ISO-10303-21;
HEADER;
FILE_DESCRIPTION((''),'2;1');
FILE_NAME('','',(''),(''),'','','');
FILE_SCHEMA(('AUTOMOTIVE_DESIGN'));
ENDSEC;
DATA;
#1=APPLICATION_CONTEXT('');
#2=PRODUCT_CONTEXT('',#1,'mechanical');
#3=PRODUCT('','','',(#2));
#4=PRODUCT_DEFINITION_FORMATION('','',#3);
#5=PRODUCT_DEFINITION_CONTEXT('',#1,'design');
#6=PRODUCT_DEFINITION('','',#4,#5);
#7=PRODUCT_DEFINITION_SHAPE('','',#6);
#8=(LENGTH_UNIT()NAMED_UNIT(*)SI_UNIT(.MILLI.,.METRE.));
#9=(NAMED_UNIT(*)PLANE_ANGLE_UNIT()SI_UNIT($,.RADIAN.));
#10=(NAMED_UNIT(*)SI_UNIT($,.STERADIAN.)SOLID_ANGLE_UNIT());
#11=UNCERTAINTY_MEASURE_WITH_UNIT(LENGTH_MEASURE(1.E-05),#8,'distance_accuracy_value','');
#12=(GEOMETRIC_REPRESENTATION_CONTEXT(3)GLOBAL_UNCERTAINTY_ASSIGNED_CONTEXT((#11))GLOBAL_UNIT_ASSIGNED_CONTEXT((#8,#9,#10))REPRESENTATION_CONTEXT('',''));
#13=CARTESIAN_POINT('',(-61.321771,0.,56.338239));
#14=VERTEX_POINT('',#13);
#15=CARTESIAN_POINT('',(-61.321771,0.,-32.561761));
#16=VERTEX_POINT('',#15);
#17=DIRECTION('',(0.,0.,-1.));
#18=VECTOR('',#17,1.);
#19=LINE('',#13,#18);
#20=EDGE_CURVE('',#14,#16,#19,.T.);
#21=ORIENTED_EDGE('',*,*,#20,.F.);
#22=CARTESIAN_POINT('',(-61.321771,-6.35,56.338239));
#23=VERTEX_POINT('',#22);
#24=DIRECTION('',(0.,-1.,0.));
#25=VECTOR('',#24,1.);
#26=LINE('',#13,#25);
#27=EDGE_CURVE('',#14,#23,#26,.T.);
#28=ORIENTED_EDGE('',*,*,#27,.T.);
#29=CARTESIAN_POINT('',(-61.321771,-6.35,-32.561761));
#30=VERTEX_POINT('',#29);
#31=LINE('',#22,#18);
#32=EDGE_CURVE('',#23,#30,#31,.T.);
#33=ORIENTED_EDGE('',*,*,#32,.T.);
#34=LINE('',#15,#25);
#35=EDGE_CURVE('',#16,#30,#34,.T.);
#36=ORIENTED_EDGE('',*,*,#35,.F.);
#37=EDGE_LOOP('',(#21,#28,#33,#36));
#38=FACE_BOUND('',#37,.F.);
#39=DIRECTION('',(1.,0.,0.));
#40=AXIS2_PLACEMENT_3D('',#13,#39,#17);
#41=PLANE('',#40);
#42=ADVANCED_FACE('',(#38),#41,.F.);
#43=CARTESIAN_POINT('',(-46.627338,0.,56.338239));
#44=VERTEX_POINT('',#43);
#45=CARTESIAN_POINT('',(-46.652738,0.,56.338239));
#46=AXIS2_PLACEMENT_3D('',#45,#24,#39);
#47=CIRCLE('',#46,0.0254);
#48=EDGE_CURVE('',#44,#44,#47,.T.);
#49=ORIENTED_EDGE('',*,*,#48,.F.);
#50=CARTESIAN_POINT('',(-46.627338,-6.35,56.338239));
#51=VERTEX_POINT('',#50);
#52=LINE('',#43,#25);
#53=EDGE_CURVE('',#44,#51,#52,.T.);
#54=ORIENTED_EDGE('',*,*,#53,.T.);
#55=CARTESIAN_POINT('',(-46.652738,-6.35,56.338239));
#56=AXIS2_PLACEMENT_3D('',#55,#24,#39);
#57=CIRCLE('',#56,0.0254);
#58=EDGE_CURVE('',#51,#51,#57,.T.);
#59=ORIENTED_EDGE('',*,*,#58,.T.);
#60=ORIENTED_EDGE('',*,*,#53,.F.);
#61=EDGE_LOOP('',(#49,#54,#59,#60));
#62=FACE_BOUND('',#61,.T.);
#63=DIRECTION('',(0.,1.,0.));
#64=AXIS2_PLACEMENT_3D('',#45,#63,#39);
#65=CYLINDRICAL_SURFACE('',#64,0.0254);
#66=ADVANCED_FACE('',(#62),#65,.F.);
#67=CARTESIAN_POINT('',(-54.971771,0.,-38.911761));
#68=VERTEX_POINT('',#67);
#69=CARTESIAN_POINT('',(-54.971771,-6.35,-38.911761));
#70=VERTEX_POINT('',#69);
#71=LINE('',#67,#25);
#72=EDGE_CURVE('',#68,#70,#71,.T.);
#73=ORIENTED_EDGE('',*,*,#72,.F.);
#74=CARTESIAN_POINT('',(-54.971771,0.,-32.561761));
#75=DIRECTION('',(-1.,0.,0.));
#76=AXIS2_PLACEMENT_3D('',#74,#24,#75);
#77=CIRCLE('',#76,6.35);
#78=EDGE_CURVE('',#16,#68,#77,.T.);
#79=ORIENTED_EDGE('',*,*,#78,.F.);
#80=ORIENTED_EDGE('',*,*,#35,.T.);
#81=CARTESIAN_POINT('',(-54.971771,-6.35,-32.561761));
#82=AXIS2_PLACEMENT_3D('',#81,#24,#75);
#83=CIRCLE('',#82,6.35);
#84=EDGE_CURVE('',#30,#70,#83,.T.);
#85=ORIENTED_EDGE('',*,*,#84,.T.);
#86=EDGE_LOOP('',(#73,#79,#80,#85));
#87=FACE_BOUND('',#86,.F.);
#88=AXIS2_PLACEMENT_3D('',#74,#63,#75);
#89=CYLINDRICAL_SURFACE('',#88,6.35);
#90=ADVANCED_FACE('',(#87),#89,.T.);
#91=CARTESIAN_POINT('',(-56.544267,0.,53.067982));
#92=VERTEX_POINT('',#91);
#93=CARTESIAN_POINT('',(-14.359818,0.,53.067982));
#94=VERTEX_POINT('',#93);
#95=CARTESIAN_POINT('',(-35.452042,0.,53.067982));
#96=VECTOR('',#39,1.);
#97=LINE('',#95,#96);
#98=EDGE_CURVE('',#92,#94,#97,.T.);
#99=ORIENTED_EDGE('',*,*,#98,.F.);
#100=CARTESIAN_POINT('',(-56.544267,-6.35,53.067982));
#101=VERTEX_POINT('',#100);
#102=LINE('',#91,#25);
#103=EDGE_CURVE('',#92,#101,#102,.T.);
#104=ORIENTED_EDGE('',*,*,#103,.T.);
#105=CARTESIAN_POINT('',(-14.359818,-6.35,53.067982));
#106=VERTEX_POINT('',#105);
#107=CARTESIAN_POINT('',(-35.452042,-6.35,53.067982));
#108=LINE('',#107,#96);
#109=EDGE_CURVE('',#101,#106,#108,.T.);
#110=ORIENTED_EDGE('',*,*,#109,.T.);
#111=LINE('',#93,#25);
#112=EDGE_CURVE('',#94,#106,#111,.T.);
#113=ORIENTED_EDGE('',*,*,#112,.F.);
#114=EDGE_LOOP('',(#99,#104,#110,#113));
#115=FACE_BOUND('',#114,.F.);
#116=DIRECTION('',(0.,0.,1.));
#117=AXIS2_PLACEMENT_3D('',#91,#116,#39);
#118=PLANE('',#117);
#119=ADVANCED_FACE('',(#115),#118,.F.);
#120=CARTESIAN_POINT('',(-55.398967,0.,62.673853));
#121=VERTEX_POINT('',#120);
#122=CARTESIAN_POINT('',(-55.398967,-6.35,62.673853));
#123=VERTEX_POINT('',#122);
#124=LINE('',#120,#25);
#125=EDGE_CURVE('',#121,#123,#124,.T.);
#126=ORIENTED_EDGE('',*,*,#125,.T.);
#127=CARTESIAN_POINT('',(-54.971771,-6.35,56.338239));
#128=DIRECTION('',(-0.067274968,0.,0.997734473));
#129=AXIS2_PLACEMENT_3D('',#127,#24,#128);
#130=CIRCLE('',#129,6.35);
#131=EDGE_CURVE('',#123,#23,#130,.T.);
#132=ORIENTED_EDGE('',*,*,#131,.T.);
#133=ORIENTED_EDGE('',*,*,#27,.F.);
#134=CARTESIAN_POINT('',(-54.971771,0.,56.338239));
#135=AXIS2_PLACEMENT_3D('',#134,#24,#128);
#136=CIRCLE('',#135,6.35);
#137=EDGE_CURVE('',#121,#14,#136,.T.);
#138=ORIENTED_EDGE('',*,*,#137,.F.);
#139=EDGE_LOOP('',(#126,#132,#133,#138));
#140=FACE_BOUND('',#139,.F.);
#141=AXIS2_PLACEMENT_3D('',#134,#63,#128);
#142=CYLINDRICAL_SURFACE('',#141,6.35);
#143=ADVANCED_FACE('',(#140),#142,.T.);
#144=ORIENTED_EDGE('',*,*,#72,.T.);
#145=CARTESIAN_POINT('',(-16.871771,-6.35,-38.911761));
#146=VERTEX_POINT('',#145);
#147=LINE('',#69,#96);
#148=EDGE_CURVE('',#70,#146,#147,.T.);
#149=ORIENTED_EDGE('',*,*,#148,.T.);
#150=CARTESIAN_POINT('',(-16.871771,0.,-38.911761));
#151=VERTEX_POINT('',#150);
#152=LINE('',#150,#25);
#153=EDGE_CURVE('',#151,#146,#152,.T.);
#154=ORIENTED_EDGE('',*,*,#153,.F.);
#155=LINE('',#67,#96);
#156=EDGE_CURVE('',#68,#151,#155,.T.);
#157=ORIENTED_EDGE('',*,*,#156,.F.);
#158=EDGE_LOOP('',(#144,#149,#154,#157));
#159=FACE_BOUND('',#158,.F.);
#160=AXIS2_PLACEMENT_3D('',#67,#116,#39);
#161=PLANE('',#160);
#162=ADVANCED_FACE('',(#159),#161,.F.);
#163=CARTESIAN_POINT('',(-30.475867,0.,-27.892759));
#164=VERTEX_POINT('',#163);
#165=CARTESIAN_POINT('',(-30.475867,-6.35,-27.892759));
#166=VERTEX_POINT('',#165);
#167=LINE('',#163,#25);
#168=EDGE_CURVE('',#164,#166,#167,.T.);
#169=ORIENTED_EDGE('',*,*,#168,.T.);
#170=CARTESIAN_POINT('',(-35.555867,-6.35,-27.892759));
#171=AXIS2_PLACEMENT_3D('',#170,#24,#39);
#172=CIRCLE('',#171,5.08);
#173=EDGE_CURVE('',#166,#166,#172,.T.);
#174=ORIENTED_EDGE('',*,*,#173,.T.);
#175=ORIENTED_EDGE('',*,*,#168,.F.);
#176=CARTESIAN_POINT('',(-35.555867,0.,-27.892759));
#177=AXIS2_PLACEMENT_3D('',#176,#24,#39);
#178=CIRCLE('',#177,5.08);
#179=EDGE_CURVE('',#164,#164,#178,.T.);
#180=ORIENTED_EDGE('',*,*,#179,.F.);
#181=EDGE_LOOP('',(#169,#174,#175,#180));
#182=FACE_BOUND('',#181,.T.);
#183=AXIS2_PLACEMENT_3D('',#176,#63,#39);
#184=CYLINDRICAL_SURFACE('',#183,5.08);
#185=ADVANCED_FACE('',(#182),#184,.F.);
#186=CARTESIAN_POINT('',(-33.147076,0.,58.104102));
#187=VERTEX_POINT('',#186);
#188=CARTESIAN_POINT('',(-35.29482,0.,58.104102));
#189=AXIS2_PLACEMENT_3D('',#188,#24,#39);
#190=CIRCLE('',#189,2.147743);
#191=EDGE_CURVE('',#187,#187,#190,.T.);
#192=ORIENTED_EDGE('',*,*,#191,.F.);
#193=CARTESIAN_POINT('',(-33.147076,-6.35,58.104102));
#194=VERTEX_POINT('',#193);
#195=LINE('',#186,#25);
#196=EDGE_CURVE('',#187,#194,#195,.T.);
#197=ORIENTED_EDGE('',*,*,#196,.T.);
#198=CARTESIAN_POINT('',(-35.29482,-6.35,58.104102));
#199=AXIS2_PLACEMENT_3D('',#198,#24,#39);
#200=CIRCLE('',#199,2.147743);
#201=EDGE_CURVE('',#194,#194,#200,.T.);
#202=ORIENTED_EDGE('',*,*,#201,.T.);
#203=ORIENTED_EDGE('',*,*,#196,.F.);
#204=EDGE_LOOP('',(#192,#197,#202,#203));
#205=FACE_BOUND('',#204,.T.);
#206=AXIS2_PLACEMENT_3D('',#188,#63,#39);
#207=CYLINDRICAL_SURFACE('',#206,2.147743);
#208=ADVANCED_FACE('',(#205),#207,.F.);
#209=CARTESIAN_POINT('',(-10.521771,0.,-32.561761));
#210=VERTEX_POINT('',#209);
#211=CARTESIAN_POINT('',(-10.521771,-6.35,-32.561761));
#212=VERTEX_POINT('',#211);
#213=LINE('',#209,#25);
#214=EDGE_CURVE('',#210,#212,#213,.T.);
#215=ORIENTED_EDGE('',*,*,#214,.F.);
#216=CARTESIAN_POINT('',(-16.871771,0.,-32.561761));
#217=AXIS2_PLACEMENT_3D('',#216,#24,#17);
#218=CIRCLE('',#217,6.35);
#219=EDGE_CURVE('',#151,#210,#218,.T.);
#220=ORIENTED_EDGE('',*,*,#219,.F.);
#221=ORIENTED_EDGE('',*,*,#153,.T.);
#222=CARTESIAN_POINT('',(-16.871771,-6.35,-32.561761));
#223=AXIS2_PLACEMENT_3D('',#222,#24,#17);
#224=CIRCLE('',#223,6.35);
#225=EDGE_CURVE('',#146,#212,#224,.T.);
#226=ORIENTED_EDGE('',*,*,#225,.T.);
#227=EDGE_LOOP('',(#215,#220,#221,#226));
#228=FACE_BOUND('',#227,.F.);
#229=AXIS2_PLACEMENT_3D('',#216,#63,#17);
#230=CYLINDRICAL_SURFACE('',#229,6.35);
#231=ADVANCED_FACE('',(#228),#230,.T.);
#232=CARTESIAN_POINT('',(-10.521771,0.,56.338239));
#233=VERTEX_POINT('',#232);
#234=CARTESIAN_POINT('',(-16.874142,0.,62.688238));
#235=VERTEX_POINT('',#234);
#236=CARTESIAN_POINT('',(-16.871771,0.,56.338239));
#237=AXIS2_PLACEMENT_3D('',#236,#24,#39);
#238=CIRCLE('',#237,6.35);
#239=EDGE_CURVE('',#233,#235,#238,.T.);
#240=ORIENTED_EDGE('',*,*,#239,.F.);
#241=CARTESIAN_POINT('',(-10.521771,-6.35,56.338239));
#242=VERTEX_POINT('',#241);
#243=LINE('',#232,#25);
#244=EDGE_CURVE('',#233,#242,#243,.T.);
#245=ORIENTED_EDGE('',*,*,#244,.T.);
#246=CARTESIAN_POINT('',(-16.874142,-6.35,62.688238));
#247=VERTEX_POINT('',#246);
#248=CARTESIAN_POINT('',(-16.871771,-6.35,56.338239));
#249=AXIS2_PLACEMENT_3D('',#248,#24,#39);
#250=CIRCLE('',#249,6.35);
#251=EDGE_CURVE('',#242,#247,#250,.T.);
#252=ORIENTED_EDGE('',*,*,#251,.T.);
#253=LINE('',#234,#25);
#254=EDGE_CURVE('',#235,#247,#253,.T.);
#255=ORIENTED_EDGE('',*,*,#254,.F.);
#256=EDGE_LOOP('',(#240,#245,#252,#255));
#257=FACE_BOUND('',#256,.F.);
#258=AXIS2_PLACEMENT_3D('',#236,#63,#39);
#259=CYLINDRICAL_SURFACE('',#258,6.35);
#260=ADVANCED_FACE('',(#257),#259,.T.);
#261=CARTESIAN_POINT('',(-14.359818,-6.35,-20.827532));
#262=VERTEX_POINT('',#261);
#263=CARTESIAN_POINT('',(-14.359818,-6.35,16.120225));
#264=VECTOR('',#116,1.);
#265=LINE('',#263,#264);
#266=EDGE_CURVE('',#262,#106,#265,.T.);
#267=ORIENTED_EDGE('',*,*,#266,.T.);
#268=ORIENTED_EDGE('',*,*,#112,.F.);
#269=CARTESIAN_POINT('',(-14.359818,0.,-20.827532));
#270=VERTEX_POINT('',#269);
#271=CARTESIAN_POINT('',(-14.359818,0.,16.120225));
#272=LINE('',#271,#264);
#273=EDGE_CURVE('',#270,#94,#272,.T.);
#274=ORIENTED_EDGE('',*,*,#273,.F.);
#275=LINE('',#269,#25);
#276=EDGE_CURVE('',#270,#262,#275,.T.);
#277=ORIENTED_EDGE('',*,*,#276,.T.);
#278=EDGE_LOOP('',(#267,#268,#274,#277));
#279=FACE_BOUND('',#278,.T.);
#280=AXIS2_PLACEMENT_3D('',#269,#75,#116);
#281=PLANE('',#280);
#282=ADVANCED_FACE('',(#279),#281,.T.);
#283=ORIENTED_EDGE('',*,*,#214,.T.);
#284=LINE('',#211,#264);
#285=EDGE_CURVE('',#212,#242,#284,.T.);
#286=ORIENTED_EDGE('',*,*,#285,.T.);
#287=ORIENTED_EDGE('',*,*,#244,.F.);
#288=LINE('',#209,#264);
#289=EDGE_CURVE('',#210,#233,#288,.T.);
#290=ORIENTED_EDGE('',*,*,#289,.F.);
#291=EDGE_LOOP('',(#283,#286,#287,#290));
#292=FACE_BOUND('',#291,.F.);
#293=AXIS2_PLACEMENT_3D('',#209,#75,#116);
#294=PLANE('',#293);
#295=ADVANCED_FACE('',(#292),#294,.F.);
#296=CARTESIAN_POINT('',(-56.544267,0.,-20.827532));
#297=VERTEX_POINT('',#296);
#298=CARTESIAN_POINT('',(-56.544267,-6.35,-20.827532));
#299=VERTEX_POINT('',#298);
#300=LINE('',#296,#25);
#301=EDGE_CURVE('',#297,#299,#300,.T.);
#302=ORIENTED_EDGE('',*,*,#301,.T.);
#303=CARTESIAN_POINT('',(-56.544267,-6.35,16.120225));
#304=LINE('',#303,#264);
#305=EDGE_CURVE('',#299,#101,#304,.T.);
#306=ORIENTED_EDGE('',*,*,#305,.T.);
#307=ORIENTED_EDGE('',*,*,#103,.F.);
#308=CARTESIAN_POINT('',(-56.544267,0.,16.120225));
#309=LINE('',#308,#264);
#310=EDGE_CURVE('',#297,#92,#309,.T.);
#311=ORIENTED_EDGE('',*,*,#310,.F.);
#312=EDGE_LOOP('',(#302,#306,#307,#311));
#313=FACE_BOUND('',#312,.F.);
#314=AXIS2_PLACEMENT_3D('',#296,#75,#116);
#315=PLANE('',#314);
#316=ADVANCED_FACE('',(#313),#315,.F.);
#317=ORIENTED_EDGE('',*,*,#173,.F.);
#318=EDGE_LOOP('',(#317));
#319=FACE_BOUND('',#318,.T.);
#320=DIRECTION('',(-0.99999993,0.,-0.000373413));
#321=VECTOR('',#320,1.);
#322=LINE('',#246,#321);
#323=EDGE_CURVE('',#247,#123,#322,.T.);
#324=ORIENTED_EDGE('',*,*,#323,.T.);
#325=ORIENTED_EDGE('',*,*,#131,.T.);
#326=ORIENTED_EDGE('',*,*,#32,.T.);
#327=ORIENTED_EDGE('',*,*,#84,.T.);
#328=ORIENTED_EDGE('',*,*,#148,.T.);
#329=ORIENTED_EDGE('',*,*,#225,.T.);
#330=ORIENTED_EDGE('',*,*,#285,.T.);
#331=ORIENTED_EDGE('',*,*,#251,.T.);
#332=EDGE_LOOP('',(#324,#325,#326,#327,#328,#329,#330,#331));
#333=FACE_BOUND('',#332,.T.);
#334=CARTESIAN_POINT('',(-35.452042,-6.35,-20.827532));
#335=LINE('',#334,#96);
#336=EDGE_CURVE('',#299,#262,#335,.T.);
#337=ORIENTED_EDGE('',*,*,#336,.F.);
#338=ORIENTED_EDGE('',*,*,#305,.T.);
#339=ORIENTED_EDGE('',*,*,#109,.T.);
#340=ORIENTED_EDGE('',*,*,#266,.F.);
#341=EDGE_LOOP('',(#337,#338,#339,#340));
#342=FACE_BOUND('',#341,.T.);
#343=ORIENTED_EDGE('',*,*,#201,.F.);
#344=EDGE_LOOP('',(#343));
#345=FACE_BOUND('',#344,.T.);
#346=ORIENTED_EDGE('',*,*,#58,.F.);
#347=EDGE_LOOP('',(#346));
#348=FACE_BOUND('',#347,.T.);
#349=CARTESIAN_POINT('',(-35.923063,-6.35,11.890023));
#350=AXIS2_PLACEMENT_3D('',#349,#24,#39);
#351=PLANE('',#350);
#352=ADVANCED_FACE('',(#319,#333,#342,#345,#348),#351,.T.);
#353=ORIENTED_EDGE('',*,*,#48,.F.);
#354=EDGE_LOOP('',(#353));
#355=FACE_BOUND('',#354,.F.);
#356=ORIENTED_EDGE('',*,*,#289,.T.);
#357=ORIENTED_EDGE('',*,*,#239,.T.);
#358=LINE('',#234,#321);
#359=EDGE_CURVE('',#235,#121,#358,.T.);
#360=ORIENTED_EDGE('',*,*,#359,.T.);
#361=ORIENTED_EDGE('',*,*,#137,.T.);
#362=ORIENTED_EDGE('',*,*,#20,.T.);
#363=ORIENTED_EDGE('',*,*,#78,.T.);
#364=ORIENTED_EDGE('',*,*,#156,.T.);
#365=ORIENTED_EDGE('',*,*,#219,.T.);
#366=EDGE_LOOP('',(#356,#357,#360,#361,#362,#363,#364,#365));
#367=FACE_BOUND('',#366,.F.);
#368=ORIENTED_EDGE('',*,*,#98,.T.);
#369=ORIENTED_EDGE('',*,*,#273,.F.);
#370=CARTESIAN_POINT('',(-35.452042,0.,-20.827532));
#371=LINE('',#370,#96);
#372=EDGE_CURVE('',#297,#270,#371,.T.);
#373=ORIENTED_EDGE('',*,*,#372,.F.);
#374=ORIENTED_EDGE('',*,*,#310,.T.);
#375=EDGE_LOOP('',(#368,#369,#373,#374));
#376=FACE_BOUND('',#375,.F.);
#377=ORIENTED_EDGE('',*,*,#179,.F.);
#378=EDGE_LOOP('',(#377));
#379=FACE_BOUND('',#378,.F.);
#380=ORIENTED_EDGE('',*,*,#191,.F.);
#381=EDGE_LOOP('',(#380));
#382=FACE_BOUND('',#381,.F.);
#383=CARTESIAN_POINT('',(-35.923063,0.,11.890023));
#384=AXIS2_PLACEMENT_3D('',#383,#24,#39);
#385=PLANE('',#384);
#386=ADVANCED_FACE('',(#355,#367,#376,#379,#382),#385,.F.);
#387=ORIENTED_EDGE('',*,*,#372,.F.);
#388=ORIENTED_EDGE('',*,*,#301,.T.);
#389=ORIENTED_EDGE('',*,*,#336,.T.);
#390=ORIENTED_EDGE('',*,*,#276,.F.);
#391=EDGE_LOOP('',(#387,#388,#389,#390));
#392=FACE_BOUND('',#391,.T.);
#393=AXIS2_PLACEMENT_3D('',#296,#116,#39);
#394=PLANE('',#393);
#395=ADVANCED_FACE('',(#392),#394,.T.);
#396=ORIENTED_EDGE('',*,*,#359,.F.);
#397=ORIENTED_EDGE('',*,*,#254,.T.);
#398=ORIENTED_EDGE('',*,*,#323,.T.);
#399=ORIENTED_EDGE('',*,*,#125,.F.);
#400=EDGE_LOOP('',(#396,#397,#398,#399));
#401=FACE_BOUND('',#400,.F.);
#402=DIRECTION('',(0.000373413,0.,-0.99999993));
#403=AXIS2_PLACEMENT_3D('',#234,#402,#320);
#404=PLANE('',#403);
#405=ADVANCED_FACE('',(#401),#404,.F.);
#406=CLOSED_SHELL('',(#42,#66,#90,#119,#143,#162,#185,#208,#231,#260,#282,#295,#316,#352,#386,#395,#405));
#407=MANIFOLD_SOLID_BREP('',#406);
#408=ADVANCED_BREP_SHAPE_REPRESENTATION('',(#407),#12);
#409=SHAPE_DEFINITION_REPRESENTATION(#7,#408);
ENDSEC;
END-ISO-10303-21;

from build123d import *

# Parameters (mm, degrees)
F0_R     = 5.08
F0_R_2   = 0.0254
F0_W     = 42.184448801
F0_H     = 73.8955140114
F0_R_3   = 2.1477431595
F1_DEPTH = 6.35


# Not quite as in the source:
# - ends of sketch curves that miss each other by under 0.0002 mm in the source are joined


with BuildPart() as f1:
    # F0 (on Front) → F1 (new body)
    with BuildSketch(Plane.XZ):
        with BuildLine():
            ThreePointArc((-55.3989668916, 62.6738528225), (-59.6104772855, 60.6747009039), (-61.3217708439, 56.3382389188))
            Line((-61.3217708439, 56.3382389188), (-61.3217708439, -32.5617610812))
            ThreePointArc((-61.3217708439, -32.5617610812), (-59.4618989044, -37.0518891418), (-54.9717708439, -38.9117610812))
            Line((-54.9717708439, -38.9117610812), (-16.8717708439, -38.9117610812))
            ThreePointArc((-16.8717708439, -38.9117610812), (-12.3816427833, -37.0518891418), (-10.5217708439, -32.5617610812))
            Line((-10.5217708439, -32.5617610812), (-10.5217708439, 56.3382389188))
            ThreePointArc((-10.5217708439, 56.3382389188), (-12.3824811709, 60.8292052103), (-16.8741419405, 62.6882384761))
            Line((-16.8741419405, 62.6882384761), (-55.3989668916, 62.6738528225))
        make_face()
        with Locations((-35.5558670086, -27.8927588342)):
            Circle(F0_R, mode=Mode.SUBTRACT)
        with Locations((-46.6527380049, 56.3382389188)):
            Circle(F0_R_2, mode=Mode.SUBTRACT)
        with Locations((-35.4520422406, 16.1202251911)):
            Rectangle(F0_W, F0_H, mode=Mode.SUBTRACT)
        with Locations((-35.2948196232, 58.1041015685)):
            Circle(F0_R_3, mode=Mode.SUBTRACT)
    extrude(amount=F1_DEPTH)


solid = f1.part
